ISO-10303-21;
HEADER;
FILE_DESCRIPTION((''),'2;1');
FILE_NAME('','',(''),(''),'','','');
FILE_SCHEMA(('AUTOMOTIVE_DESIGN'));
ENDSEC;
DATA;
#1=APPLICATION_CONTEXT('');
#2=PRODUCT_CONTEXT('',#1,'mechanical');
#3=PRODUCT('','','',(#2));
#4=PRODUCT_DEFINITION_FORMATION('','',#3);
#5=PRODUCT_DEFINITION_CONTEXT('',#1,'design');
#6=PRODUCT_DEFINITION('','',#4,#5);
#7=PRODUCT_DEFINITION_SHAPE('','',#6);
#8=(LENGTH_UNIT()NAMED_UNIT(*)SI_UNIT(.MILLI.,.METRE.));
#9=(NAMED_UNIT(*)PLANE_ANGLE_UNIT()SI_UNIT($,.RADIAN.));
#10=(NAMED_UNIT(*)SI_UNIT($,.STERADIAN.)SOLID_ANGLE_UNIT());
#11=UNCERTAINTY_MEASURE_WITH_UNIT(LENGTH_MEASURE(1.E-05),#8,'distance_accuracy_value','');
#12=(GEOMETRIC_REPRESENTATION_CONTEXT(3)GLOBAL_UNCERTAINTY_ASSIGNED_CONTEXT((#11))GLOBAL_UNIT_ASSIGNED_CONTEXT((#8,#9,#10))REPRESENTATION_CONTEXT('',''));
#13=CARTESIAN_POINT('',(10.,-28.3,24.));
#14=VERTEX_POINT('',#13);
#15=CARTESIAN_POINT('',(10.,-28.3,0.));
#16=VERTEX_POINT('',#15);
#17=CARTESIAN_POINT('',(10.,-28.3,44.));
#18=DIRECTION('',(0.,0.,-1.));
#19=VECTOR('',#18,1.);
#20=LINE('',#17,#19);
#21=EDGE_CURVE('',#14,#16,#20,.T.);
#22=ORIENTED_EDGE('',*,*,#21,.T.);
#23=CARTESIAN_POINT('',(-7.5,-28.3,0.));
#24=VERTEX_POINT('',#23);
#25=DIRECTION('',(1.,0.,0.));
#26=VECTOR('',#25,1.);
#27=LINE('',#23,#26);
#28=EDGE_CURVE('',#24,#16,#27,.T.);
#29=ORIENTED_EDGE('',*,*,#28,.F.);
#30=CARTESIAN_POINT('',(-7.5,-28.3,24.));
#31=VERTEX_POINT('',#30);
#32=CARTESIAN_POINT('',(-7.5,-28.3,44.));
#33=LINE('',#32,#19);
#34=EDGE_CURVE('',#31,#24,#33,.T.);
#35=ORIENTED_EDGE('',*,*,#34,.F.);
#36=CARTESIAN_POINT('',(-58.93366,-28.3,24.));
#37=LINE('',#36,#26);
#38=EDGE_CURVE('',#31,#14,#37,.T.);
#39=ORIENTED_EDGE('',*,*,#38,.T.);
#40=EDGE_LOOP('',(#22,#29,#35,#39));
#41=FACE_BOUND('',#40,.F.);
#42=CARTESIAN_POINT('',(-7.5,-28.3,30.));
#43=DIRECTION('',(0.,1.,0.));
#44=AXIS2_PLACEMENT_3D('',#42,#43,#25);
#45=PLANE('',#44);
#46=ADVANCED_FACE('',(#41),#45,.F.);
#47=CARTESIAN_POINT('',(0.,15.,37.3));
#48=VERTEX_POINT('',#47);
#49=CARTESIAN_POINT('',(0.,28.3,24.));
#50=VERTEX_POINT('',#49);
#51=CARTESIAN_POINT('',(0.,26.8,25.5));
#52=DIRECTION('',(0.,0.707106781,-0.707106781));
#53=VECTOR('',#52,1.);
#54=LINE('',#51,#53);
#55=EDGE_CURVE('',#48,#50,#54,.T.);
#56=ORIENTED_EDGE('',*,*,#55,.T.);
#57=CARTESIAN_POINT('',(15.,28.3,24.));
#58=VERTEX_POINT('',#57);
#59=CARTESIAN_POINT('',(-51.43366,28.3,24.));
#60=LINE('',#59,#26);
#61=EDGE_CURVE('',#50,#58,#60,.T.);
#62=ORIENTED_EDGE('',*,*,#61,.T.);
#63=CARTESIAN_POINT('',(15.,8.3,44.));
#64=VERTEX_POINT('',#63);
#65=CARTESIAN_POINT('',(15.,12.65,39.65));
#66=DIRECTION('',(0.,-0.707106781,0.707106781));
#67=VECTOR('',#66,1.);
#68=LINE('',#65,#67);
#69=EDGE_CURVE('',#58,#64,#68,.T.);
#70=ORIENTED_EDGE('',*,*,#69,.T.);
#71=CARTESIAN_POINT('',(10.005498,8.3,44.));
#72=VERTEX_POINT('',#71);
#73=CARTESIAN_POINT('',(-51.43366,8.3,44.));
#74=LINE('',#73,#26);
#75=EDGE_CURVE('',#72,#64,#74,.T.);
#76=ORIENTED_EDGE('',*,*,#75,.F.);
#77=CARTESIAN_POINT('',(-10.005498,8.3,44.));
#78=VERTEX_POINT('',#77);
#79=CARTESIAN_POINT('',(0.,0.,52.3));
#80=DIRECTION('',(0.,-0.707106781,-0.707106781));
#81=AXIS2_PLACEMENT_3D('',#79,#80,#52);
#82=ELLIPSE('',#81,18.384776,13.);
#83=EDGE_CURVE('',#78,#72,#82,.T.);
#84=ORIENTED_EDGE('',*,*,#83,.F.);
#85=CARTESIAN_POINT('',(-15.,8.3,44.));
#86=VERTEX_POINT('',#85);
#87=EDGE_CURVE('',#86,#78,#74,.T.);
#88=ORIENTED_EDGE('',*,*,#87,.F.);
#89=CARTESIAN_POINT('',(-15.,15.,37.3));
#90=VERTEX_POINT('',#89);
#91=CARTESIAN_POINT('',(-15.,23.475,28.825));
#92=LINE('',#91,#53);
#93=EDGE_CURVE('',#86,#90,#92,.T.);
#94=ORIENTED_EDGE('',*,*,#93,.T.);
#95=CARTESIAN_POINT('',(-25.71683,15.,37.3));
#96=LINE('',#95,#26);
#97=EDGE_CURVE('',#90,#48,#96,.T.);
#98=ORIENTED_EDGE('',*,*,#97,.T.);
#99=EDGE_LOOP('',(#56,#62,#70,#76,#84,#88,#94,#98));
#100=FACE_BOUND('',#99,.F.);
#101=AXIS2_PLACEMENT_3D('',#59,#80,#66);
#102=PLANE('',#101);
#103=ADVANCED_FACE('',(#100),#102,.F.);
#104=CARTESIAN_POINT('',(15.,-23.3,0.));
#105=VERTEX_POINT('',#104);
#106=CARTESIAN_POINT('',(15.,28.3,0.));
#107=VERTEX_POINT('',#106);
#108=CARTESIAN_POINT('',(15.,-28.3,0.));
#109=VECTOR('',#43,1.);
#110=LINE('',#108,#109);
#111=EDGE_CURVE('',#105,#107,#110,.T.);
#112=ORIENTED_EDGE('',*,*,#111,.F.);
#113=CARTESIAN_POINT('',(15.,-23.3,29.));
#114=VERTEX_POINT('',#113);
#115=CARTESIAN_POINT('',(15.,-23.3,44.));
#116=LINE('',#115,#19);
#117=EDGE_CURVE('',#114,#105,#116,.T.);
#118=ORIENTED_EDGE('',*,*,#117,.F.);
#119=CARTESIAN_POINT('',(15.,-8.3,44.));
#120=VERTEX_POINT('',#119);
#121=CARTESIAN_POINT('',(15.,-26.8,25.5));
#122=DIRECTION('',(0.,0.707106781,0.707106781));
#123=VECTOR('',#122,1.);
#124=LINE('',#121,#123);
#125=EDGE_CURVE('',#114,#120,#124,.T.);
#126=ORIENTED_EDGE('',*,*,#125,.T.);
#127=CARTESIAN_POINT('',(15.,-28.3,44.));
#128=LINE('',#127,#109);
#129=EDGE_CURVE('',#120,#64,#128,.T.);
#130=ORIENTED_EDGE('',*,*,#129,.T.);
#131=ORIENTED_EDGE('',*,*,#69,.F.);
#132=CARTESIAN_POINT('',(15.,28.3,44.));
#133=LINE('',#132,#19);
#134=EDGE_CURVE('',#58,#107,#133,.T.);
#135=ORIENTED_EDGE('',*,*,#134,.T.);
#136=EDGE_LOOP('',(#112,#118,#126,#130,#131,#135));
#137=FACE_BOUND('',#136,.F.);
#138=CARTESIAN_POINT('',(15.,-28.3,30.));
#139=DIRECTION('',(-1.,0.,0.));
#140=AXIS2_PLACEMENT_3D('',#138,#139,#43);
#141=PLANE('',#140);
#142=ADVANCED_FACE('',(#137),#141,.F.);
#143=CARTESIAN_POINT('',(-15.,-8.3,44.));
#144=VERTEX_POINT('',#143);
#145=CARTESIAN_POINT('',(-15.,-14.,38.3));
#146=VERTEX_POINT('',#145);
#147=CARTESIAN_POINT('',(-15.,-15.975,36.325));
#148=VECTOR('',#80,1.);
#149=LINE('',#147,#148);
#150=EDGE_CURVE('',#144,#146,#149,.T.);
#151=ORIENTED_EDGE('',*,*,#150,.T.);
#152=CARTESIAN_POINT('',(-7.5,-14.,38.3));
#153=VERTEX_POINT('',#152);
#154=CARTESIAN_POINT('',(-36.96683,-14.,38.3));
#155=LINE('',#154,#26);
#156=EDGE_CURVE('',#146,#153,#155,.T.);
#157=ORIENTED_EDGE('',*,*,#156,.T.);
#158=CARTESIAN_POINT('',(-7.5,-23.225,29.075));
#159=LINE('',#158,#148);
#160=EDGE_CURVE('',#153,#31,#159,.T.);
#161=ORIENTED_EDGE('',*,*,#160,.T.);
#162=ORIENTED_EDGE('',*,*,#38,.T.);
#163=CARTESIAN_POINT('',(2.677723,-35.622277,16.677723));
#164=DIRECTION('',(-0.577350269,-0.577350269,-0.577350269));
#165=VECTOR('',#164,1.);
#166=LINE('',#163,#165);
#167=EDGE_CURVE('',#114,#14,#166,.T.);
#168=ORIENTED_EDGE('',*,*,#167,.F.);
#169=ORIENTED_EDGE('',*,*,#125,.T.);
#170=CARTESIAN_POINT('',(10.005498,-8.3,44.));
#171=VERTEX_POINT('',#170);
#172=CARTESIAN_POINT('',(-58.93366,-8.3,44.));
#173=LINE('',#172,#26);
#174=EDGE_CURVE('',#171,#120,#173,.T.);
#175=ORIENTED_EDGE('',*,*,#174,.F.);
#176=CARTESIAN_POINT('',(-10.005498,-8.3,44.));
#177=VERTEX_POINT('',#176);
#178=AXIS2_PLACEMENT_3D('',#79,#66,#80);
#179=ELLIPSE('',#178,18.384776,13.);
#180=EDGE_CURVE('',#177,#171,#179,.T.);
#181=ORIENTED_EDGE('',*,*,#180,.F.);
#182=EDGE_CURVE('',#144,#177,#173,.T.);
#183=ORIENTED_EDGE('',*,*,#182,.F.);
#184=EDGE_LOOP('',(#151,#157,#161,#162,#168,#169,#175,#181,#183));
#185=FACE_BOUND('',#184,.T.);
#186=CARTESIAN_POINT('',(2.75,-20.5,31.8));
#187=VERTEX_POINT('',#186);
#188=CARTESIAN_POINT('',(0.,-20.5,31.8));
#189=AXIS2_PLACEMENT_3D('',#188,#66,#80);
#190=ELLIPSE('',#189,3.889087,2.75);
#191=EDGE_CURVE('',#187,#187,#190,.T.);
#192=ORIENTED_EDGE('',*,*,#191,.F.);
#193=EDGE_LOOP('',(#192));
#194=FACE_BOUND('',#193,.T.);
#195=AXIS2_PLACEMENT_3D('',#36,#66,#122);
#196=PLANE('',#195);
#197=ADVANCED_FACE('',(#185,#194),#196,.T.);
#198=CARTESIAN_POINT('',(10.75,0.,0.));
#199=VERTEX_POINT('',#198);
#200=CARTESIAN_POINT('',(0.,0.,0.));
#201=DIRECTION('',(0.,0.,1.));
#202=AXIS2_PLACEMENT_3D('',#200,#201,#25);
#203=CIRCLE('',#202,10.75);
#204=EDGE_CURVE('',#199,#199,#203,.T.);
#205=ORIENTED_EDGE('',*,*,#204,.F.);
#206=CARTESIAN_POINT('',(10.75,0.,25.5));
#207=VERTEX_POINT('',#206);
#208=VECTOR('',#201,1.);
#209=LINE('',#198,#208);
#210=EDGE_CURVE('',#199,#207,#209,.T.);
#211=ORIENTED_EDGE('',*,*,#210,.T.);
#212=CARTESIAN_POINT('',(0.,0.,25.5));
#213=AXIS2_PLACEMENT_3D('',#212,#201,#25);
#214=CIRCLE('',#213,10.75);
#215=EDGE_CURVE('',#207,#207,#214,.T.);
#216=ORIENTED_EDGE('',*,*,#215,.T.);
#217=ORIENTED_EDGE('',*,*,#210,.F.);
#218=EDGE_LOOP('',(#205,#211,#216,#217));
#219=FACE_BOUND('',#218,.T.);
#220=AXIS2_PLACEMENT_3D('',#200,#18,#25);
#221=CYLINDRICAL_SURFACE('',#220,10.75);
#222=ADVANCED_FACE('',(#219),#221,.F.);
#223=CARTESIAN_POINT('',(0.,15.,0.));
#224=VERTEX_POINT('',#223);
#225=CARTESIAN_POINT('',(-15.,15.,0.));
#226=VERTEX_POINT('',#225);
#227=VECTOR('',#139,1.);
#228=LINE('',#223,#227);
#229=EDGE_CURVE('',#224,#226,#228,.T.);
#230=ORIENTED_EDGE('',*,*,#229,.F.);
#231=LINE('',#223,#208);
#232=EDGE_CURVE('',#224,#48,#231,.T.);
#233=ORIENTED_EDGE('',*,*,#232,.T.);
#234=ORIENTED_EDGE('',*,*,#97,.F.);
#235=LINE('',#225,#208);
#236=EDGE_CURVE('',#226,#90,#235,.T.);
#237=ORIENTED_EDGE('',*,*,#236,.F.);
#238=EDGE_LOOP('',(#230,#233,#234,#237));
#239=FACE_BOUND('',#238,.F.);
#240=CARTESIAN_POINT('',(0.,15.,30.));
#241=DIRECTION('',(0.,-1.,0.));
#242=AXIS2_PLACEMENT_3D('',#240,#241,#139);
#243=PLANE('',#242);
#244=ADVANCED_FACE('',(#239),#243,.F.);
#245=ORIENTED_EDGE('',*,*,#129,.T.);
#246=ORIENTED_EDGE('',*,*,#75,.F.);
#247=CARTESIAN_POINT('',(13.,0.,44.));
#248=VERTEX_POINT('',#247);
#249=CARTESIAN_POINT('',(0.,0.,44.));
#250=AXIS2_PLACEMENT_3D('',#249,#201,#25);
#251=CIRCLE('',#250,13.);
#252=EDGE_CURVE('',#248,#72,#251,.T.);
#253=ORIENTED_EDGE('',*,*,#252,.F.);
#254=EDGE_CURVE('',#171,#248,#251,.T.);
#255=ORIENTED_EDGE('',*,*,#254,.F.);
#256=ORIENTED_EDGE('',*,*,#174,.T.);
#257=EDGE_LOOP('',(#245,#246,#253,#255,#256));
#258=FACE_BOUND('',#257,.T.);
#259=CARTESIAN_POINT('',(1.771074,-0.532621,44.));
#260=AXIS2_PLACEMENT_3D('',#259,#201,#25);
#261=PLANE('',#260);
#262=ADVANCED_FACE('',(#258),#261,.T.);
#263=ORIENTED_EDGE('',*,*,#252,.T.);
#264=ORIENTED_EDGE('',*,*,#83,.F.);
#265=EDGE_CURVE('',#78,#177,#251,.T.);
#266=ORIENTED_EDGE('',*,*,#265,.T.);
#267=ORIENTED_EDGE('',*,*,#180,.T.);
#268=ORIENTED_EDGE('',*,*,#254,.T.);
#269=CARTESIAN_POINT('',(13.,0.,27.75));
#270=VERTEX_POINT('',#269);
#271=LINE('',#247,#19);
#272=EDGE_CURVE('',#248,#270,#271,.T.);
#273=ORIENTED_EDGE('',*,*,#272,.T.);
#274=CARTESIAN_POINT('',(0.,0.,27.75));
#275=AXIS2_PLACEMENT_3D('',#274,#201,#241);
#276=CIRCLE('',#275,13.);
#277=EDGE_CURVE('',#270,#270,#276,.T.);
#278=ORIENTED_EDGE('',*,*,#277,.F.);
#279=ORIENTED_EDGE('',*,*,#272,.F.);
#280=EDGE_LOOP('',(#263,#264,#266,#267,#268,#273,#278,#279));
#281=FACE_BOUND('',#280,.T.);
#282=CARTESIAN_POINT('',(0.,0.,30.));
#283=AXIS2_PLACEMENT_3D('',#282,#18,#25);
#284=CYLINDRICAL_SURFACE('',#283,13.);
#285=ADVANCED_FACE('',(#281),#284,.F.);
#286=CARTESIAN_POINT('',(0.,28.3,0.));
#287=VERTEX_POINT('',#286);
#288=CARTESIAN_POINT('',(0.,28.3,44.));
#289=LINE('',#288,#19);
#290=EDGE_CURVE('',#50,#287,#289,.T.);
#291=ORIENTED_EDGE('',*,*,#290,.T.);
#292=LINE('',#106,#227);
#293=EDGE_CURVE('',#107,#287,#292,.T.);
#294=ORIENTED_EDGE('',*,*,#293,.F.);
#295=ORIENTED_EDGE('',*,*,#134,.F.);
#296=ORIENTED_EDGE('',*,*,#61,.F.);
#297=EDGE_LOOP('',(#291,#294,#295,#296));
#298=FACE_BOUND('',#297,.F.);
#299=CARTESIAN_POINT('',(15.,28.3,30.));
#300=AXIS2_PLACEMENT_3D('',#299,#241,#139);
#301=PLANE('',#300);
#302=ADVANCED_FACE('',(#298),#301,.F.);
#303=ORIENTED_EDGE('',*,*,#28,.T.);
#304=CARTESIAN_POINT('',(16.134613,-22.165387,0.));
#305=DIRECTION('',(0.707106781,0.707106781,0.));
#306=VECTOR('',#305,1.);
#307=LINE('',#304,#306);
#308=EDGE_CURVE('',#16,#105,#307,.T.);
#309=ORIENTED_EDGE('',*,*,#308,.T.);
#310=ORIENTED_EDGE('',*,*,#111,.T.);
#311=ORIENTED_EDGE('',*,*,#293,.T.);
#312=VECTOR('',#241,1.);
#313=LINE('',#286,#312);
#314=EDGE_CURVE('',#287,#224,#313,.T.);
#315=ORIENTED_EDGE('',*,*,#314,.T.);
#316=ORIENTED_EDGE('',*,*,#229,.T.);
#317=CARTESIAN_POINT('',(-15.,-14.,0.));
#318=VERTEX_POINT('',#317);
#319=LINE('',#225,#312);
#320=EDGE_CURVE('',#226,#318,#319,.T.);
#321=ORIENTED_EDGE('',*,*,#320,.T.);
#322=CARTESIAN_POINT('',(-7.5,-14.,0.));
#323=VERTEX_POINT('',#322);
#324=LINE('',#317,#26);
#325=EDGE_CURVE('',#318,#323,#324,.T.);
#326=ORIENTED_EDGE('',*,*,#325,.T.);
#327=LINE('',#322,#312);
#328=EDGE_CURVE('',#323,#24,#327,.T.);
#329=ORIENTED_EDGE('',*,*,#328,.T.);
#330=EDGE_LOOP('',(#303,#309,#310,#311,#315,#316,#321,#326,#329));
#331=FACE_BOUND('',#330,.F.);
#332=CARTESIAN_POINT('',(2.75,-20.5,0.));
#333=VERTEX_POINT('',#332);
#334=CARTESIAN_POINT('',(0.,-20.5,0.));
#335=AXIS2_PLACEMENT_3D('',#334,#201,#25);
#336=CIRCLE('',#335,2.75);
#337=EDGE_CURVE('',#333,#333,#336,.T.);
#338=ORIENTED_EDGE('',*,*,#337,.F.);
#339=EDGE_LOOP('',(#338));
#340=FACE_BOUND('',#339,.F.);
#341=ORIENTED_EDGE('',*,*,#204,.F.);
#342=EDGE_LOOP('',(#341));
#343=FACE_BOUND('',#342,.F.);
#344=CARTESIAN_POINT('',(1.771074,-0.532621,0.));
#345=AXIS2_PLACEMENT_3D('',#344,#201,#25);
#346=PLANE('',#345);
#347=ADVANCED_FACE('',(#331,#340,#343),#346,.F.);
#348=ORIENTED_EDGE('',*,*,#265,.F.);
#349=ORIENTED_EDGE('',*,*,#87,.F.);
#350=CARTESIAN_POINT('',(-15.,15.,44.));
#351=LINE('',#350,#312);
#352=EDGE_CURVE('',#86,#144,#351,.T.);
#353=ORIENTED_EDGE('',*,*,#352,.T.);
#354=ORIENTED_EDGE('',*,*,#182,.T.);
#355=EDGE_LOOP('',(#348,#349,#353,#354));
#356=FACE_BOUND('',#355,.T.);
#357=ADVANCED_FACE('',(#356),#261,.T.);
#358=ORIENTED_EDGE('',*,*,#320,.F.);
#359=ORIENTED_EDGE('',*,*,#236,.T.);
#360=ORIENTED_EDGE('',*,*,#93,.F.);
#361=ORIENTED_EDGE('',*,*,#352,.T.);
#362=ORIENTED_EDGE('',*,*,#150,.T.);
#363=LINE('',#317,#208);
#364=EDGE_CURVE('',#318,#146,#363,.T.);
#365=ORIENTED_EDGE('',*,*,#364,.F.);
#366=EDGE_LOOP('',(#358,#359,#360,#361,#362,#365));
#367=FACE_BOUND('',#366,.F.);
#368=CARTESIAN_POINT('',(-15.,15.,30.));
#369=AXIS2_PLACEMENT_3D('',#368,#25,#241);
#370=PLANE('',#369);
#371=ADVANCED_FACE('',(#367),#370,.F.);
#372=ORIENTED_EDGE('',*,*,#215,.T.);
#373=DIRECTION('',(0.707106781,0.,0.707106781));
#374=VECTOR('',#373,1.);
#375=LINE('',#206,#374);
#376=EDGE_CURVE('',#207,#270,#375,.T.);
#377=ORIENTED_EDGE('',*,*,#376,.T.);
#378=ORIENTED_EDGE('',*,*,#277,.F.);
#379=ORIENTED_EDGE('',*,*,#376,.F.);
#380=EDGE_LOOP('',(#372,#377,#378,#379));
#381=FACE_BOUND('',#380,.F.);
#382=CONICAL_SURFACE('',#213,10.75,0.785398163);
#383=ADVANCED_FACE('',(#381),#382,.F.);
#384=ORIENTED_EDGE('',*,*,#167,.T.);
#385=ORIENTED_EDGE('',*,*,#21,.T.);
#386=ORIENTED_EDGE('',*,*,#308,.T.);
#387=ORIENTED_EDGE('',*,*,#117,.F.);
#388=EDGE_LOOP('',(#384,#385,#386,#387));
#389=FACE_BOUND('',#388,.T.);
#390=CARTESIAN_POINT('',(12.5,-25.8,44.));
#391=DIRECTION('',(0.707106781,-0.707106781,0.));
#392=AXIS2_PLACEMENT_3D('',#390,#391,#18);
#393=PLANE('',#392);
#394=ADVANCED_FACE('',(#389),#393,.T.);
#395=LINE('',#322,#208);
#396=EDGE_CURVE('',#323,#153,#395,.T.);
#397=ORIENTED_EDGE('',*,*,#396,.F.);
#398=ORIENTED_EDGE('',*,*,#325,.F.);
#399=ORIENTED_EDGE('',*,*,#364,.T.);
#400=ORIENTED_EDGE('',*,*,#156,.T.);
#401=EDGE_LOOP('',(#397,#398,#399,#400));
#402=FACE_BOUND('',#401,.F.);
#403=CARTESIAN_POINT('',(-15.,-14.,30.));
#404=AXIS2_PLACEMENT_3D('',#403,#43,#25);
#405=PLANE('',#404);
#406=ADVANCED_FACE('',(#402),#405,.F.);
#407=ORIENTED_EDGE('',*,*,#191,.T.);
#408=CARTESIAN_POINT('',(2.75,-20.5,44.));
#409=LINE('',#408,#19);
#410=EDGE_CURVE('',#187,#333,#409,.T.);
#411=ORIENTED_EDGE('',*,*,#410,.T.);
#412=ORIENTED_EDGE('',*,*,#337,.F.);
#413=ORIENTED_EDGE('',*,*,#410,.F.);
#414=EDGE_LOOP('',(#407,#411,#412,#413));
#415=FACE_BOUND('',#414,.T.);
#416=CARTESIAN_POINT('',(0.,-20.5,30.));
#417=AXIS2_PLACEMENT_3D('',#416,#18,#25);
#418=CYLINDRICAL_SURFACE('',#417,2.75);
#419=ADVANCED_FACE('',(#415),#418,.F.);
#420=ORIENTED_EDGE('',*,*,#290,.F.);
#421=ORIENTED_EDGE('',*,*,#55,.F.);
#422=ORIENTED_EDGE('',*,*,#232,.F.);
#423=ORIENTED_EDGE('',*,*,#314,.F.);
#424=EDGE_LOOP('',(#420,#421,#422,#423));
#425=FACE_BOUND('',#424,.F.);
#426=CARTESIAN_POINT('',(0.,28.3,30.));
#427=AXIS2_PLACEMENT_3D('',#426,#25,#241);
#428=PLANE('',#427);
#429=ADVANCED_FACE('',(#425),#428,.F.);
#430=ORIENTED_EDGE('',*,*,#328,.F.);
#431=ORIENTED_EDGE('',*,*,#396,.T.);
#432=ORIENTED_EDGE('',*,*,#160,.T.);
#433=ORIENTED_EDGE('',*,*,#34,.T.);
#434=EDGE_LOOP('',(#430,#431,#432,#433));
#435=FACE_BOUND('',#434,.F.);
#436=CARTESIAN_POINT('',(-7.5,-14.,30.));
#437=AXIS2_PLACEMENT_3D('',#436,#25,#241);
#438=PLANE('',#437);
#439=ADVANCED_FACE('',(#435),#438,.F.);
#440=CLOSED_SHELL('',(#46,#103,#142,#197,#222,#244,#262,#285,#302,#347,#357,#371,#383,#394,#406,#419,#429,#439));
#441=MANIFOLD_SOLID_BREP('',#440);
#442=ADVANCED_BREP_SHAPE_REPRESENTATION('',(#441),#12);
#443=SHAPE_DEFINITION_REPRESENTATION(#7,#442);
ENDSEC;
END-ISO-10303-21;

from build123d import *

# Parameters (mm, degrees)
F0_R        = 2.75
F0_R_2      = 13
F0_R_3      = 10.75
F1_DEPTH    = 30
F2_START    = 30
F2_DEPTH    = 14
F3_S5_R     = 13
F3_T6_DEPTH = 23
F4_SIZE     = 5
F5_T1_DEPTH = 117.8673195186
F5_T3_DEPTH = 120.3673195186


# Not quite as in the source:
# - a fillet or chamfer that OpenCascade refuses, or shapes differently, is made with other operations: its cross-section is extruded or revolved along the edge and cut away or added


with BuildPart() as f1:
    # F0 (on Top) → F1 (new body)
    with BuildSketch(Plane.XY):
        Polygon((0, 28.3), (0, 15), (-15, 15), (-15, -14), (-7.5, -14), (-7.5, -28.3), (0, -28.3), (15, -28.3), (15, 15), (15, 28.3), align=None)
        with Locations((0, -20.5)):
            Circle(F0_R, mode=Mode.SUBTRACT)
        Circle(F0_R_2, mode=Mode.SUBTRACT)
        Circle(F0_R_2)
        Circle(F0_R_3, mode=Mode.SUBTRACT)
    extrude(amount=F1_DEPTH)

    # F0 (on Top) → F2 (join)
    with BuildSketch(Plane.XY.offset(F2_START)):
        Polygon((0, 28.3), (0, 15), (-15, 15), (-15, -14), (-7.5, -14), (-7.5, -28.3), (0, -28.3), (15, -28.3), (15, 15), (15, 28.3), align=None)
        with Locations((0, -20.5)):
            Circle(F0_R, mode=Mode.SUBTRACT)
        Circle(F0_R_2, mode=Mode.SUBTRACT)
    extrude(amount=F2_DEPTH)

    # F3: chamfer of 4.5 on 1 edges, made by hand


with BuildPart() as f3_tool2:
    # F3_s3 → F3_t4 (revolve)
    with BuildSketch(Plane.XZ):
        Polygon((10.75, 25.5), (15.25, 30), (10.75, 30), align=None)
    revolve(axis=Axis((0, 0, 30), (0, 0, 1)))

    # F3_s5 → F3_t6 (intersect, symmetric)
    with BuildSketch(Plane.XY.offset(27.8)):
        Circle(F3_S5_R)
    extrude(amount=F3_T6_DEPTH, both=True, mode=Mode.INTERSECT)


with BuildPart() as f1_1:
    add(f1.part)

    # F3_t1: cut F3_tool2
    add(f3_tool2.part, mode=Mode.SUBTRACT)

    # F4
    f4_edges = [f1_1.edges().sort_by_distance(p)[0] for p in [
        (15, -28.3, 22),
    ]]
    chamfer(f4_edges, length=F4_SIZE)

    # F5: chamfer of 20 on 2 edges, made by hand

    # F5_s2 → F5_t1 (cut)
    with BuildSketch(Plane.YZ.offset(-51.4336597593)):
        Polygon((28.3, 24), (8.3, 44), (28.3, 44), align=None)
    extrude(amount=F5_T1_DEPTH, mode=Mode.SUBTRACT)

    # F5_s4 → F5_t3 (cut)
    with BuildSketch(Plane.YZ.offset(-58.9336597593)):
        Polygon((-28.3, 24), (-8.3, 44), (-28.3, 44), align=None)
    extrude(amount=F5_T3_DEPTH, mode=Mode.SUBTRACT)


solid = f1_1.part
